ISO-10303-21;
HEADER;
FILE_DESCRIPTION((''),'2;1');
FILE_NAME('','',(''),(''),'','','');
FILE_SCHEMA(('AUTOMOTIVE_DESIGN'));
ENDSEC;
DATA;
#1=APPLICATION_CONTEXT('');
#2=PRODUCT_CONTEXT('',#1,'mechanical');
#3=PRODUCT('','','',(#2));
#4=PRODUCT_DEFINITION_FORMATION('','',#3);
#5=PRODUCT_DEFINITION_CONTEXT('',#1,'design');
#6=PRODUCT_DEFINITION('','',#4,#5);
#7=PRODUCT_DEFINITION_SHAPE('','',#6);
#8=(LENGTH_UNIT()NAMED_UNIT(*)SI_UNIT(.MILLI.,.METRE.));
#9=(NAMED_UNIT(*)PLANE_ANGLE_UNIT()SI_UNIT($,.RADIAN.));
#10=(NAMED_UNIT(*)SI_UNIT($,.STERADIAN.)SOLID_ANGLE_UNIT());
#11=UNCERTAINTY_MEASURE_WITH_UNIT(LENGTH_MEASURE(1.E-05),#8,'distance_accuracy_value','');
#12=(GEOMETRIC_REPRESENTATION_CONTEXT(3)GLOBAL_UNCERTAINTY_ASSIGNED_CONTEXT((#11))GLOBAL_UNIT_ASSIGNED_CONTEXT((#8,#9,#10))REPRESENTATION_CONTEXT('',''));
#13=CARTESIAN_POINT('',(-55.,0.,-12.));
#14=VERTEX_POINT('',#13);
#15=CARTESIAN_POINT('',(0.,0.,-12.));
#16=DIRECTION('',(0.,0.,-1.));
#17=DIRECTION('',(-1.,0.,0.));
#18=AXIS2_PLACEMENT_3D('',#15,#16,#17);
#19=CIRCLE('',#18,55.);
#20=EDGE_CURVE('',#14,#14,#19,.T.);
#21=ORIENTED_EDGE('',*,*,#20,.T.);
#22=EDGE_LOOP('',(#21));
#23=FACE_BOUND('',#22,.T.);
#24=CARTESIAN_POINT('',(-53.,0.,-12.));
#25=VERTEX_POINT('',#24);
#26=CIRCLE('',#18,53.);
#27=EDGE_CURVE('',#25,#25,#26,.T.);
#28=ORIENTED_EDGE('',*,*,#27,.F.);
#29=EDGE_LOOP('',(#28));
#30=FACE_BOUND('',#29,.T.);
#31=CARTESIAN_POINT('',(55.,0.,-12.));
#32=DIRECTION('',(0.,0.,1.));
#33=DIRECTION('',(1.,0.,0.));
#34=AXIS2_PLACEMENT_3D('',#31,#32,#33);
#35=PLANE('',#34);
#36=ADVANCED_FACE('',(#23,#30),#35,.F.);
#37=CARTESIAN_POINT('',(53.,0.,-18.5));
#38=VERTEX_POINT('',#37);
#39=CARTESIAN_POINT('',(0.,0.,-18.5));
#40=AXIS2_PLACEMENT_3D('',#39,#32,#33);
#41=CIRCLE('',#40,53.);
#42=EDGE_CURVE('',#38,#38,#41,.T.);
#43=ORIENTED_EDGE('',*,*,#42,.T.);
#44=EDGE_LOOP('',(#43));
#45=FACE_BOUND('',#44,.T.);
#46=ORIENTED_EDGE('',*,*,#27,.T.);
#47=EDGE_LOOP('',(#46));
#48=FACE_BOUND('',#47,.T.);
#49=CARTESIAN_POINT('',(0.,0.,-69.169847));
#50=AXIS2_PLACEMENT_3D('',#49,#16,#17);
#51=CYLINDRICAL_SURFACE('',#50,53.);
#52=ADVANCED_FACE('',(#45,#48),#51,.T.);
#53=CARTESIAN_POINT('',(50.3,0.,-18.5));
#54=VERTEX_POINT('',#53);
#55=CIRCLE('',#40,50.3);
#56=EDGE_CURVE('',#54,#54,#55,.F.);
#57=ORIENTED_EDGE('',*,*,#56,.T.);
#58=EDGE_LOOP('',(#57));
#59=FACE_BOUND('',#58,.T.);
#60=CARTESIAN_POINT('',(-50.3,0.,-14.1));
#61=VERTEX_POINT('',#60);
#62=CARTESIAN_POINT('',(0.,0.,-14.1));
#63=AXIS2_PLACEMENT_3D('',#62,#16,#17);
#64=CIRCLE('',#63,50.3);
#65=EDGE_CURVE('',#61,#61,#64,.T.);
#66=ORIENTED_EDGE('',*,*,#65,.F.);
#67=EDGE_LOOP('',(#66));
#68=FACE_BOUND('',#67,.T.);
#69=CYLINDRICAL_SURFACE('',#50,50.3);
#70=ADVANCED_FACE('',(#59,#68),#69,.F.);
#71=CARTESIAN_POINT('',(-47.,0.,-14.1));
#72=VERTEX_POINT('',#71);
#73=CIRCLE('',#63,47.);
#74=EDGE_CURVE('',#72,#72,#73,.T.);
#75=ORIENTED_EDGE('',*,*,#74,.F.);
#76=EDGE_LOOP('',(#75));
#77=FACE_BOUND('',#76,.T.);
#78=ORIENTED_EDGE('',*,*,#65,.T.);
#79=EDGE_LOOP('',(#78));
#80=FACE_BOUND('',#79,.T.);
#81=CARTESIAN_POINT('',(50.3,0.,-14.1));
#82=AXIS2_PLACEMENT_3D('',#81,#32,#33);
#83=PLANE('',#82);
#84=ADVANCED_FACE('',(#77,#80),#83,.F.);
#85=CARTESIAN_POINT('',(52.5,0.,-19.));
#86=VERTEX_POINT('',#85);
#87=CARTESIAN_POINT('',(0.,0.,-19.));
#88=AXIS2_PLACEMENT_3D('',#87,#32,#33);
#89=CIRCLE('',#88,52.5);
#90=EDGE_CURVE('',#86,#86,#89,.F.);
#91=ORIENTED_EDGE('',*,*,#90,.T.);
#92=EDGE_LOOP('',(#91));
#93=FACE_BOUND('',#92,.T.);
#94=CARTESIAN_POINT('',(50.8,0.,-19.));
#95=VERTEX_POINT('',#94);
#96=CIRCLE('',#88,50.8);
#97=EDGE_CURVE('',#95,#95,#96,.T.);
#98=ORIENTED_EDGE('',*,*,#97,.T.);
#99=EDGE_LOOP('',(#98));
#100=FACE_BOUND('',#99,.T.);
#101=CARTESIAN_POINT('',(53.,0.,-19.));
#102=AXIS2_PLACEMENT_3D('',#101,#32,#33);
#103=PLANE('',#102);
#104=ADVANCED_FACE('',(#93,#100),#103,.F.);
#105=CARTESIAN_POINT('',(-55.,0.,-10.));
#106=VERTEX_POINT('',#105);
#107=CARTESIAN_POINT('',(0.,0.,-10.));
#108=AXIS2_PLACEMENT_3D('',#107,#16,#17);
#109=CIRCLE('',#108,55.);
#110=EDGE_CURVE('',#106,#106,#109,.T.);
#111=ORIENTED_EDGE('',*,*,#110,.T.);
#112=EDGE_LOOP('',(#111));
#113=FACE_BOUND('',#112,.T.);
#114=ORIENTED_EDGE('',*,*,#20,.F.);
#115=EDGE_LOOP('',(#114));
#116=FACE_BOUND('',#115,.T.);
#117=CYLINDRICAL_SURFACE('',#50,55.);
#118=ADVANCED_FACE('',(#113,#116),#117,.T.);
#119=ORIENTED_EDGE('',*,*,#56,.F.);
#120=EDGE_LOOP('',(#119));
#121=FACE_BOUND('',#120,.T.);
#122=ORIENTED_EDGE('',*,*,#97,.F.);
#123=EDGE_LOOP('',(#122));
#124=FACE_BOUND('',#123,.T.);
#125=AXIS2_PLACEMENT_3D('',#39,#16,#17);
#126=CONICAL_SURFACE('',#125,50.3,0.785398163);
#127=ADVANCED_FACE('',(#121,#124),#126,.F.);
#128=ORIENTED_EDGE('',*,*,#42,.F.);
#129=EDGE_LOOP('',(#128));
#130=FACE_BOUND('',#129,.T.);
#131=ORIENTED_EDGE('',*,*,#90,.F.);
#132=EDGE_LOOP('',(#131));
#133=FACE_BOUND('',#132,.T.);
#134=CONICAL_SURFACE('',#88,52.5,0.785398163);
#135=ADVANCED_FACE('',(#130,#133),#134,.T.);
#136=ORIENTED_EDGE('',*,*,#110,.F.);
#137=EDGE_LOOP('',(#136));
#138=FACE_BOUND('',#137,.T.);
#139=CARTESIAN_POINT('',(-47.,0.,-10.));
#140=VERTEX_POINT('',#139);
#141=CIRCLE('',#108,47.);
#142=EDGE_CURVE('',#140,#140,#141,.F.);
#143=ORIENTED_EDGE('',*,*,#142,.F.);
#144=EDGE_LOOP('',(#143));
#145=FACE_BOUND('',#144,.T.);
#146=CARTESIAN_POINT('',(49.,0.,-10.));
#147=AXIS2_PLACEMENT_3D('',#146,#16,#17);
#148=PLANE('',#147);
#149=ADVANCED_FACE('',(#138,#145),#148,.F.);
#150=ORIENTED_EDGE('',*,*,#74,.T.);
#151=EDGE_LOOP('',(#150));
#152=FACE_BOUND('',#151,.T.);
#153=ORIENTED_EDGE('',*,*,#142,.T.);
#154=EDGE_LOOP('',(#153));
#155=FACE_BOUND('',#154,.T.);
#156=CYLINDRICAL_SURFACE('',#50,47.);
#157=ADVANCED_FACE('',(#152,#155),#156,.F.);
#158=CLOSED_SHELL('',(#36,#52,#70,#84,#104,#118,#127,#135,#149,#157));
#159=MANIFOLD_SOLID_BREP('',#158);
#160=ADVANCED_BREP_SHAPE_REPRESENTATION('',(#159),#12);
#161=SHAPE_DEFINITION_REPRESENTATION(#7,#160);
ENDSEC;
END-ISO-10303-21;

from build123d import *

# Parameters (mm, degrees)
CHAMFER1_SIZE           = 0.5
CUT_EXTRUDE1_DEPTH      = 81.068720484
CUT_EXTRUDE1_DEPTH_BACK = 81.068720484
SKETCH2_W               = 110.89778328
SKETCH2_H               = 14.994305345


with BuildPart() as part:
    # Sketch1 → Revolve1 (revolve)
    with BuildSketch(Plane(origin=(0, 0, 0), x_dir=(1, 0, 0), z_dir=(0, 1, 0)), mode=Mode.PRIVATE) as revolve1_sk:
        Polygon((50.3, 19), (50.3, 14.1), (47, 14.1), (47, 0), (49, 0), (49, 2.5), (48, 2.5), (48, 7.5), (49, 7.5), (49, 10), (55, 10), (55, 12), (53, 12), (53, 19), align=None)
    revolve(revolve1_sk.sketch.rotate(Axis((0, 0, -69.169847328), (0, 0, 1)), 180), axis=Axis((0, 0, -69.169847328), (0, 0, 1)))

    # Chamfer1
    chamfer1_edges = [part.edges().sort_by_distance(p)[0] for p in [
        (49, 0, -10),
        (49, 0, -7.5),
        (48, 0, -7.5),
        (48, 0, -2.5),
        (49, 0, -2.5),
        (49, 0, 0),
        (50.3, 0, -19),
        (53, 0, -19),
    ]]
    chamfer(chamfer1_edges, length=CHAMFER1_SIZE - 0.0001)  # a hair under: the kernel refuses the full size

    # Sketch2 → Cut-Extrude1 (cut, two sides: drawn at the far end of the back side and taken through both)
    with BuildSketch(Plane(origin=(0, 0, 0), x_dir=(1, 0, 0), z_dir=(0, 1, 0)).offset(-CUT_EXTRUDE1_DEPTH_BACK)):
        with Locations((0.44889164, 2.502847328)):
            Rectangle(SKETCH2_W, SKETCH2_H)
    extrude(amount=CUT_EXTRUDE1_DEPTH + CUT_EXTRUDE1_DEPTH_BACK, mode=Mode.SUBTRACT)


solid = part.part
